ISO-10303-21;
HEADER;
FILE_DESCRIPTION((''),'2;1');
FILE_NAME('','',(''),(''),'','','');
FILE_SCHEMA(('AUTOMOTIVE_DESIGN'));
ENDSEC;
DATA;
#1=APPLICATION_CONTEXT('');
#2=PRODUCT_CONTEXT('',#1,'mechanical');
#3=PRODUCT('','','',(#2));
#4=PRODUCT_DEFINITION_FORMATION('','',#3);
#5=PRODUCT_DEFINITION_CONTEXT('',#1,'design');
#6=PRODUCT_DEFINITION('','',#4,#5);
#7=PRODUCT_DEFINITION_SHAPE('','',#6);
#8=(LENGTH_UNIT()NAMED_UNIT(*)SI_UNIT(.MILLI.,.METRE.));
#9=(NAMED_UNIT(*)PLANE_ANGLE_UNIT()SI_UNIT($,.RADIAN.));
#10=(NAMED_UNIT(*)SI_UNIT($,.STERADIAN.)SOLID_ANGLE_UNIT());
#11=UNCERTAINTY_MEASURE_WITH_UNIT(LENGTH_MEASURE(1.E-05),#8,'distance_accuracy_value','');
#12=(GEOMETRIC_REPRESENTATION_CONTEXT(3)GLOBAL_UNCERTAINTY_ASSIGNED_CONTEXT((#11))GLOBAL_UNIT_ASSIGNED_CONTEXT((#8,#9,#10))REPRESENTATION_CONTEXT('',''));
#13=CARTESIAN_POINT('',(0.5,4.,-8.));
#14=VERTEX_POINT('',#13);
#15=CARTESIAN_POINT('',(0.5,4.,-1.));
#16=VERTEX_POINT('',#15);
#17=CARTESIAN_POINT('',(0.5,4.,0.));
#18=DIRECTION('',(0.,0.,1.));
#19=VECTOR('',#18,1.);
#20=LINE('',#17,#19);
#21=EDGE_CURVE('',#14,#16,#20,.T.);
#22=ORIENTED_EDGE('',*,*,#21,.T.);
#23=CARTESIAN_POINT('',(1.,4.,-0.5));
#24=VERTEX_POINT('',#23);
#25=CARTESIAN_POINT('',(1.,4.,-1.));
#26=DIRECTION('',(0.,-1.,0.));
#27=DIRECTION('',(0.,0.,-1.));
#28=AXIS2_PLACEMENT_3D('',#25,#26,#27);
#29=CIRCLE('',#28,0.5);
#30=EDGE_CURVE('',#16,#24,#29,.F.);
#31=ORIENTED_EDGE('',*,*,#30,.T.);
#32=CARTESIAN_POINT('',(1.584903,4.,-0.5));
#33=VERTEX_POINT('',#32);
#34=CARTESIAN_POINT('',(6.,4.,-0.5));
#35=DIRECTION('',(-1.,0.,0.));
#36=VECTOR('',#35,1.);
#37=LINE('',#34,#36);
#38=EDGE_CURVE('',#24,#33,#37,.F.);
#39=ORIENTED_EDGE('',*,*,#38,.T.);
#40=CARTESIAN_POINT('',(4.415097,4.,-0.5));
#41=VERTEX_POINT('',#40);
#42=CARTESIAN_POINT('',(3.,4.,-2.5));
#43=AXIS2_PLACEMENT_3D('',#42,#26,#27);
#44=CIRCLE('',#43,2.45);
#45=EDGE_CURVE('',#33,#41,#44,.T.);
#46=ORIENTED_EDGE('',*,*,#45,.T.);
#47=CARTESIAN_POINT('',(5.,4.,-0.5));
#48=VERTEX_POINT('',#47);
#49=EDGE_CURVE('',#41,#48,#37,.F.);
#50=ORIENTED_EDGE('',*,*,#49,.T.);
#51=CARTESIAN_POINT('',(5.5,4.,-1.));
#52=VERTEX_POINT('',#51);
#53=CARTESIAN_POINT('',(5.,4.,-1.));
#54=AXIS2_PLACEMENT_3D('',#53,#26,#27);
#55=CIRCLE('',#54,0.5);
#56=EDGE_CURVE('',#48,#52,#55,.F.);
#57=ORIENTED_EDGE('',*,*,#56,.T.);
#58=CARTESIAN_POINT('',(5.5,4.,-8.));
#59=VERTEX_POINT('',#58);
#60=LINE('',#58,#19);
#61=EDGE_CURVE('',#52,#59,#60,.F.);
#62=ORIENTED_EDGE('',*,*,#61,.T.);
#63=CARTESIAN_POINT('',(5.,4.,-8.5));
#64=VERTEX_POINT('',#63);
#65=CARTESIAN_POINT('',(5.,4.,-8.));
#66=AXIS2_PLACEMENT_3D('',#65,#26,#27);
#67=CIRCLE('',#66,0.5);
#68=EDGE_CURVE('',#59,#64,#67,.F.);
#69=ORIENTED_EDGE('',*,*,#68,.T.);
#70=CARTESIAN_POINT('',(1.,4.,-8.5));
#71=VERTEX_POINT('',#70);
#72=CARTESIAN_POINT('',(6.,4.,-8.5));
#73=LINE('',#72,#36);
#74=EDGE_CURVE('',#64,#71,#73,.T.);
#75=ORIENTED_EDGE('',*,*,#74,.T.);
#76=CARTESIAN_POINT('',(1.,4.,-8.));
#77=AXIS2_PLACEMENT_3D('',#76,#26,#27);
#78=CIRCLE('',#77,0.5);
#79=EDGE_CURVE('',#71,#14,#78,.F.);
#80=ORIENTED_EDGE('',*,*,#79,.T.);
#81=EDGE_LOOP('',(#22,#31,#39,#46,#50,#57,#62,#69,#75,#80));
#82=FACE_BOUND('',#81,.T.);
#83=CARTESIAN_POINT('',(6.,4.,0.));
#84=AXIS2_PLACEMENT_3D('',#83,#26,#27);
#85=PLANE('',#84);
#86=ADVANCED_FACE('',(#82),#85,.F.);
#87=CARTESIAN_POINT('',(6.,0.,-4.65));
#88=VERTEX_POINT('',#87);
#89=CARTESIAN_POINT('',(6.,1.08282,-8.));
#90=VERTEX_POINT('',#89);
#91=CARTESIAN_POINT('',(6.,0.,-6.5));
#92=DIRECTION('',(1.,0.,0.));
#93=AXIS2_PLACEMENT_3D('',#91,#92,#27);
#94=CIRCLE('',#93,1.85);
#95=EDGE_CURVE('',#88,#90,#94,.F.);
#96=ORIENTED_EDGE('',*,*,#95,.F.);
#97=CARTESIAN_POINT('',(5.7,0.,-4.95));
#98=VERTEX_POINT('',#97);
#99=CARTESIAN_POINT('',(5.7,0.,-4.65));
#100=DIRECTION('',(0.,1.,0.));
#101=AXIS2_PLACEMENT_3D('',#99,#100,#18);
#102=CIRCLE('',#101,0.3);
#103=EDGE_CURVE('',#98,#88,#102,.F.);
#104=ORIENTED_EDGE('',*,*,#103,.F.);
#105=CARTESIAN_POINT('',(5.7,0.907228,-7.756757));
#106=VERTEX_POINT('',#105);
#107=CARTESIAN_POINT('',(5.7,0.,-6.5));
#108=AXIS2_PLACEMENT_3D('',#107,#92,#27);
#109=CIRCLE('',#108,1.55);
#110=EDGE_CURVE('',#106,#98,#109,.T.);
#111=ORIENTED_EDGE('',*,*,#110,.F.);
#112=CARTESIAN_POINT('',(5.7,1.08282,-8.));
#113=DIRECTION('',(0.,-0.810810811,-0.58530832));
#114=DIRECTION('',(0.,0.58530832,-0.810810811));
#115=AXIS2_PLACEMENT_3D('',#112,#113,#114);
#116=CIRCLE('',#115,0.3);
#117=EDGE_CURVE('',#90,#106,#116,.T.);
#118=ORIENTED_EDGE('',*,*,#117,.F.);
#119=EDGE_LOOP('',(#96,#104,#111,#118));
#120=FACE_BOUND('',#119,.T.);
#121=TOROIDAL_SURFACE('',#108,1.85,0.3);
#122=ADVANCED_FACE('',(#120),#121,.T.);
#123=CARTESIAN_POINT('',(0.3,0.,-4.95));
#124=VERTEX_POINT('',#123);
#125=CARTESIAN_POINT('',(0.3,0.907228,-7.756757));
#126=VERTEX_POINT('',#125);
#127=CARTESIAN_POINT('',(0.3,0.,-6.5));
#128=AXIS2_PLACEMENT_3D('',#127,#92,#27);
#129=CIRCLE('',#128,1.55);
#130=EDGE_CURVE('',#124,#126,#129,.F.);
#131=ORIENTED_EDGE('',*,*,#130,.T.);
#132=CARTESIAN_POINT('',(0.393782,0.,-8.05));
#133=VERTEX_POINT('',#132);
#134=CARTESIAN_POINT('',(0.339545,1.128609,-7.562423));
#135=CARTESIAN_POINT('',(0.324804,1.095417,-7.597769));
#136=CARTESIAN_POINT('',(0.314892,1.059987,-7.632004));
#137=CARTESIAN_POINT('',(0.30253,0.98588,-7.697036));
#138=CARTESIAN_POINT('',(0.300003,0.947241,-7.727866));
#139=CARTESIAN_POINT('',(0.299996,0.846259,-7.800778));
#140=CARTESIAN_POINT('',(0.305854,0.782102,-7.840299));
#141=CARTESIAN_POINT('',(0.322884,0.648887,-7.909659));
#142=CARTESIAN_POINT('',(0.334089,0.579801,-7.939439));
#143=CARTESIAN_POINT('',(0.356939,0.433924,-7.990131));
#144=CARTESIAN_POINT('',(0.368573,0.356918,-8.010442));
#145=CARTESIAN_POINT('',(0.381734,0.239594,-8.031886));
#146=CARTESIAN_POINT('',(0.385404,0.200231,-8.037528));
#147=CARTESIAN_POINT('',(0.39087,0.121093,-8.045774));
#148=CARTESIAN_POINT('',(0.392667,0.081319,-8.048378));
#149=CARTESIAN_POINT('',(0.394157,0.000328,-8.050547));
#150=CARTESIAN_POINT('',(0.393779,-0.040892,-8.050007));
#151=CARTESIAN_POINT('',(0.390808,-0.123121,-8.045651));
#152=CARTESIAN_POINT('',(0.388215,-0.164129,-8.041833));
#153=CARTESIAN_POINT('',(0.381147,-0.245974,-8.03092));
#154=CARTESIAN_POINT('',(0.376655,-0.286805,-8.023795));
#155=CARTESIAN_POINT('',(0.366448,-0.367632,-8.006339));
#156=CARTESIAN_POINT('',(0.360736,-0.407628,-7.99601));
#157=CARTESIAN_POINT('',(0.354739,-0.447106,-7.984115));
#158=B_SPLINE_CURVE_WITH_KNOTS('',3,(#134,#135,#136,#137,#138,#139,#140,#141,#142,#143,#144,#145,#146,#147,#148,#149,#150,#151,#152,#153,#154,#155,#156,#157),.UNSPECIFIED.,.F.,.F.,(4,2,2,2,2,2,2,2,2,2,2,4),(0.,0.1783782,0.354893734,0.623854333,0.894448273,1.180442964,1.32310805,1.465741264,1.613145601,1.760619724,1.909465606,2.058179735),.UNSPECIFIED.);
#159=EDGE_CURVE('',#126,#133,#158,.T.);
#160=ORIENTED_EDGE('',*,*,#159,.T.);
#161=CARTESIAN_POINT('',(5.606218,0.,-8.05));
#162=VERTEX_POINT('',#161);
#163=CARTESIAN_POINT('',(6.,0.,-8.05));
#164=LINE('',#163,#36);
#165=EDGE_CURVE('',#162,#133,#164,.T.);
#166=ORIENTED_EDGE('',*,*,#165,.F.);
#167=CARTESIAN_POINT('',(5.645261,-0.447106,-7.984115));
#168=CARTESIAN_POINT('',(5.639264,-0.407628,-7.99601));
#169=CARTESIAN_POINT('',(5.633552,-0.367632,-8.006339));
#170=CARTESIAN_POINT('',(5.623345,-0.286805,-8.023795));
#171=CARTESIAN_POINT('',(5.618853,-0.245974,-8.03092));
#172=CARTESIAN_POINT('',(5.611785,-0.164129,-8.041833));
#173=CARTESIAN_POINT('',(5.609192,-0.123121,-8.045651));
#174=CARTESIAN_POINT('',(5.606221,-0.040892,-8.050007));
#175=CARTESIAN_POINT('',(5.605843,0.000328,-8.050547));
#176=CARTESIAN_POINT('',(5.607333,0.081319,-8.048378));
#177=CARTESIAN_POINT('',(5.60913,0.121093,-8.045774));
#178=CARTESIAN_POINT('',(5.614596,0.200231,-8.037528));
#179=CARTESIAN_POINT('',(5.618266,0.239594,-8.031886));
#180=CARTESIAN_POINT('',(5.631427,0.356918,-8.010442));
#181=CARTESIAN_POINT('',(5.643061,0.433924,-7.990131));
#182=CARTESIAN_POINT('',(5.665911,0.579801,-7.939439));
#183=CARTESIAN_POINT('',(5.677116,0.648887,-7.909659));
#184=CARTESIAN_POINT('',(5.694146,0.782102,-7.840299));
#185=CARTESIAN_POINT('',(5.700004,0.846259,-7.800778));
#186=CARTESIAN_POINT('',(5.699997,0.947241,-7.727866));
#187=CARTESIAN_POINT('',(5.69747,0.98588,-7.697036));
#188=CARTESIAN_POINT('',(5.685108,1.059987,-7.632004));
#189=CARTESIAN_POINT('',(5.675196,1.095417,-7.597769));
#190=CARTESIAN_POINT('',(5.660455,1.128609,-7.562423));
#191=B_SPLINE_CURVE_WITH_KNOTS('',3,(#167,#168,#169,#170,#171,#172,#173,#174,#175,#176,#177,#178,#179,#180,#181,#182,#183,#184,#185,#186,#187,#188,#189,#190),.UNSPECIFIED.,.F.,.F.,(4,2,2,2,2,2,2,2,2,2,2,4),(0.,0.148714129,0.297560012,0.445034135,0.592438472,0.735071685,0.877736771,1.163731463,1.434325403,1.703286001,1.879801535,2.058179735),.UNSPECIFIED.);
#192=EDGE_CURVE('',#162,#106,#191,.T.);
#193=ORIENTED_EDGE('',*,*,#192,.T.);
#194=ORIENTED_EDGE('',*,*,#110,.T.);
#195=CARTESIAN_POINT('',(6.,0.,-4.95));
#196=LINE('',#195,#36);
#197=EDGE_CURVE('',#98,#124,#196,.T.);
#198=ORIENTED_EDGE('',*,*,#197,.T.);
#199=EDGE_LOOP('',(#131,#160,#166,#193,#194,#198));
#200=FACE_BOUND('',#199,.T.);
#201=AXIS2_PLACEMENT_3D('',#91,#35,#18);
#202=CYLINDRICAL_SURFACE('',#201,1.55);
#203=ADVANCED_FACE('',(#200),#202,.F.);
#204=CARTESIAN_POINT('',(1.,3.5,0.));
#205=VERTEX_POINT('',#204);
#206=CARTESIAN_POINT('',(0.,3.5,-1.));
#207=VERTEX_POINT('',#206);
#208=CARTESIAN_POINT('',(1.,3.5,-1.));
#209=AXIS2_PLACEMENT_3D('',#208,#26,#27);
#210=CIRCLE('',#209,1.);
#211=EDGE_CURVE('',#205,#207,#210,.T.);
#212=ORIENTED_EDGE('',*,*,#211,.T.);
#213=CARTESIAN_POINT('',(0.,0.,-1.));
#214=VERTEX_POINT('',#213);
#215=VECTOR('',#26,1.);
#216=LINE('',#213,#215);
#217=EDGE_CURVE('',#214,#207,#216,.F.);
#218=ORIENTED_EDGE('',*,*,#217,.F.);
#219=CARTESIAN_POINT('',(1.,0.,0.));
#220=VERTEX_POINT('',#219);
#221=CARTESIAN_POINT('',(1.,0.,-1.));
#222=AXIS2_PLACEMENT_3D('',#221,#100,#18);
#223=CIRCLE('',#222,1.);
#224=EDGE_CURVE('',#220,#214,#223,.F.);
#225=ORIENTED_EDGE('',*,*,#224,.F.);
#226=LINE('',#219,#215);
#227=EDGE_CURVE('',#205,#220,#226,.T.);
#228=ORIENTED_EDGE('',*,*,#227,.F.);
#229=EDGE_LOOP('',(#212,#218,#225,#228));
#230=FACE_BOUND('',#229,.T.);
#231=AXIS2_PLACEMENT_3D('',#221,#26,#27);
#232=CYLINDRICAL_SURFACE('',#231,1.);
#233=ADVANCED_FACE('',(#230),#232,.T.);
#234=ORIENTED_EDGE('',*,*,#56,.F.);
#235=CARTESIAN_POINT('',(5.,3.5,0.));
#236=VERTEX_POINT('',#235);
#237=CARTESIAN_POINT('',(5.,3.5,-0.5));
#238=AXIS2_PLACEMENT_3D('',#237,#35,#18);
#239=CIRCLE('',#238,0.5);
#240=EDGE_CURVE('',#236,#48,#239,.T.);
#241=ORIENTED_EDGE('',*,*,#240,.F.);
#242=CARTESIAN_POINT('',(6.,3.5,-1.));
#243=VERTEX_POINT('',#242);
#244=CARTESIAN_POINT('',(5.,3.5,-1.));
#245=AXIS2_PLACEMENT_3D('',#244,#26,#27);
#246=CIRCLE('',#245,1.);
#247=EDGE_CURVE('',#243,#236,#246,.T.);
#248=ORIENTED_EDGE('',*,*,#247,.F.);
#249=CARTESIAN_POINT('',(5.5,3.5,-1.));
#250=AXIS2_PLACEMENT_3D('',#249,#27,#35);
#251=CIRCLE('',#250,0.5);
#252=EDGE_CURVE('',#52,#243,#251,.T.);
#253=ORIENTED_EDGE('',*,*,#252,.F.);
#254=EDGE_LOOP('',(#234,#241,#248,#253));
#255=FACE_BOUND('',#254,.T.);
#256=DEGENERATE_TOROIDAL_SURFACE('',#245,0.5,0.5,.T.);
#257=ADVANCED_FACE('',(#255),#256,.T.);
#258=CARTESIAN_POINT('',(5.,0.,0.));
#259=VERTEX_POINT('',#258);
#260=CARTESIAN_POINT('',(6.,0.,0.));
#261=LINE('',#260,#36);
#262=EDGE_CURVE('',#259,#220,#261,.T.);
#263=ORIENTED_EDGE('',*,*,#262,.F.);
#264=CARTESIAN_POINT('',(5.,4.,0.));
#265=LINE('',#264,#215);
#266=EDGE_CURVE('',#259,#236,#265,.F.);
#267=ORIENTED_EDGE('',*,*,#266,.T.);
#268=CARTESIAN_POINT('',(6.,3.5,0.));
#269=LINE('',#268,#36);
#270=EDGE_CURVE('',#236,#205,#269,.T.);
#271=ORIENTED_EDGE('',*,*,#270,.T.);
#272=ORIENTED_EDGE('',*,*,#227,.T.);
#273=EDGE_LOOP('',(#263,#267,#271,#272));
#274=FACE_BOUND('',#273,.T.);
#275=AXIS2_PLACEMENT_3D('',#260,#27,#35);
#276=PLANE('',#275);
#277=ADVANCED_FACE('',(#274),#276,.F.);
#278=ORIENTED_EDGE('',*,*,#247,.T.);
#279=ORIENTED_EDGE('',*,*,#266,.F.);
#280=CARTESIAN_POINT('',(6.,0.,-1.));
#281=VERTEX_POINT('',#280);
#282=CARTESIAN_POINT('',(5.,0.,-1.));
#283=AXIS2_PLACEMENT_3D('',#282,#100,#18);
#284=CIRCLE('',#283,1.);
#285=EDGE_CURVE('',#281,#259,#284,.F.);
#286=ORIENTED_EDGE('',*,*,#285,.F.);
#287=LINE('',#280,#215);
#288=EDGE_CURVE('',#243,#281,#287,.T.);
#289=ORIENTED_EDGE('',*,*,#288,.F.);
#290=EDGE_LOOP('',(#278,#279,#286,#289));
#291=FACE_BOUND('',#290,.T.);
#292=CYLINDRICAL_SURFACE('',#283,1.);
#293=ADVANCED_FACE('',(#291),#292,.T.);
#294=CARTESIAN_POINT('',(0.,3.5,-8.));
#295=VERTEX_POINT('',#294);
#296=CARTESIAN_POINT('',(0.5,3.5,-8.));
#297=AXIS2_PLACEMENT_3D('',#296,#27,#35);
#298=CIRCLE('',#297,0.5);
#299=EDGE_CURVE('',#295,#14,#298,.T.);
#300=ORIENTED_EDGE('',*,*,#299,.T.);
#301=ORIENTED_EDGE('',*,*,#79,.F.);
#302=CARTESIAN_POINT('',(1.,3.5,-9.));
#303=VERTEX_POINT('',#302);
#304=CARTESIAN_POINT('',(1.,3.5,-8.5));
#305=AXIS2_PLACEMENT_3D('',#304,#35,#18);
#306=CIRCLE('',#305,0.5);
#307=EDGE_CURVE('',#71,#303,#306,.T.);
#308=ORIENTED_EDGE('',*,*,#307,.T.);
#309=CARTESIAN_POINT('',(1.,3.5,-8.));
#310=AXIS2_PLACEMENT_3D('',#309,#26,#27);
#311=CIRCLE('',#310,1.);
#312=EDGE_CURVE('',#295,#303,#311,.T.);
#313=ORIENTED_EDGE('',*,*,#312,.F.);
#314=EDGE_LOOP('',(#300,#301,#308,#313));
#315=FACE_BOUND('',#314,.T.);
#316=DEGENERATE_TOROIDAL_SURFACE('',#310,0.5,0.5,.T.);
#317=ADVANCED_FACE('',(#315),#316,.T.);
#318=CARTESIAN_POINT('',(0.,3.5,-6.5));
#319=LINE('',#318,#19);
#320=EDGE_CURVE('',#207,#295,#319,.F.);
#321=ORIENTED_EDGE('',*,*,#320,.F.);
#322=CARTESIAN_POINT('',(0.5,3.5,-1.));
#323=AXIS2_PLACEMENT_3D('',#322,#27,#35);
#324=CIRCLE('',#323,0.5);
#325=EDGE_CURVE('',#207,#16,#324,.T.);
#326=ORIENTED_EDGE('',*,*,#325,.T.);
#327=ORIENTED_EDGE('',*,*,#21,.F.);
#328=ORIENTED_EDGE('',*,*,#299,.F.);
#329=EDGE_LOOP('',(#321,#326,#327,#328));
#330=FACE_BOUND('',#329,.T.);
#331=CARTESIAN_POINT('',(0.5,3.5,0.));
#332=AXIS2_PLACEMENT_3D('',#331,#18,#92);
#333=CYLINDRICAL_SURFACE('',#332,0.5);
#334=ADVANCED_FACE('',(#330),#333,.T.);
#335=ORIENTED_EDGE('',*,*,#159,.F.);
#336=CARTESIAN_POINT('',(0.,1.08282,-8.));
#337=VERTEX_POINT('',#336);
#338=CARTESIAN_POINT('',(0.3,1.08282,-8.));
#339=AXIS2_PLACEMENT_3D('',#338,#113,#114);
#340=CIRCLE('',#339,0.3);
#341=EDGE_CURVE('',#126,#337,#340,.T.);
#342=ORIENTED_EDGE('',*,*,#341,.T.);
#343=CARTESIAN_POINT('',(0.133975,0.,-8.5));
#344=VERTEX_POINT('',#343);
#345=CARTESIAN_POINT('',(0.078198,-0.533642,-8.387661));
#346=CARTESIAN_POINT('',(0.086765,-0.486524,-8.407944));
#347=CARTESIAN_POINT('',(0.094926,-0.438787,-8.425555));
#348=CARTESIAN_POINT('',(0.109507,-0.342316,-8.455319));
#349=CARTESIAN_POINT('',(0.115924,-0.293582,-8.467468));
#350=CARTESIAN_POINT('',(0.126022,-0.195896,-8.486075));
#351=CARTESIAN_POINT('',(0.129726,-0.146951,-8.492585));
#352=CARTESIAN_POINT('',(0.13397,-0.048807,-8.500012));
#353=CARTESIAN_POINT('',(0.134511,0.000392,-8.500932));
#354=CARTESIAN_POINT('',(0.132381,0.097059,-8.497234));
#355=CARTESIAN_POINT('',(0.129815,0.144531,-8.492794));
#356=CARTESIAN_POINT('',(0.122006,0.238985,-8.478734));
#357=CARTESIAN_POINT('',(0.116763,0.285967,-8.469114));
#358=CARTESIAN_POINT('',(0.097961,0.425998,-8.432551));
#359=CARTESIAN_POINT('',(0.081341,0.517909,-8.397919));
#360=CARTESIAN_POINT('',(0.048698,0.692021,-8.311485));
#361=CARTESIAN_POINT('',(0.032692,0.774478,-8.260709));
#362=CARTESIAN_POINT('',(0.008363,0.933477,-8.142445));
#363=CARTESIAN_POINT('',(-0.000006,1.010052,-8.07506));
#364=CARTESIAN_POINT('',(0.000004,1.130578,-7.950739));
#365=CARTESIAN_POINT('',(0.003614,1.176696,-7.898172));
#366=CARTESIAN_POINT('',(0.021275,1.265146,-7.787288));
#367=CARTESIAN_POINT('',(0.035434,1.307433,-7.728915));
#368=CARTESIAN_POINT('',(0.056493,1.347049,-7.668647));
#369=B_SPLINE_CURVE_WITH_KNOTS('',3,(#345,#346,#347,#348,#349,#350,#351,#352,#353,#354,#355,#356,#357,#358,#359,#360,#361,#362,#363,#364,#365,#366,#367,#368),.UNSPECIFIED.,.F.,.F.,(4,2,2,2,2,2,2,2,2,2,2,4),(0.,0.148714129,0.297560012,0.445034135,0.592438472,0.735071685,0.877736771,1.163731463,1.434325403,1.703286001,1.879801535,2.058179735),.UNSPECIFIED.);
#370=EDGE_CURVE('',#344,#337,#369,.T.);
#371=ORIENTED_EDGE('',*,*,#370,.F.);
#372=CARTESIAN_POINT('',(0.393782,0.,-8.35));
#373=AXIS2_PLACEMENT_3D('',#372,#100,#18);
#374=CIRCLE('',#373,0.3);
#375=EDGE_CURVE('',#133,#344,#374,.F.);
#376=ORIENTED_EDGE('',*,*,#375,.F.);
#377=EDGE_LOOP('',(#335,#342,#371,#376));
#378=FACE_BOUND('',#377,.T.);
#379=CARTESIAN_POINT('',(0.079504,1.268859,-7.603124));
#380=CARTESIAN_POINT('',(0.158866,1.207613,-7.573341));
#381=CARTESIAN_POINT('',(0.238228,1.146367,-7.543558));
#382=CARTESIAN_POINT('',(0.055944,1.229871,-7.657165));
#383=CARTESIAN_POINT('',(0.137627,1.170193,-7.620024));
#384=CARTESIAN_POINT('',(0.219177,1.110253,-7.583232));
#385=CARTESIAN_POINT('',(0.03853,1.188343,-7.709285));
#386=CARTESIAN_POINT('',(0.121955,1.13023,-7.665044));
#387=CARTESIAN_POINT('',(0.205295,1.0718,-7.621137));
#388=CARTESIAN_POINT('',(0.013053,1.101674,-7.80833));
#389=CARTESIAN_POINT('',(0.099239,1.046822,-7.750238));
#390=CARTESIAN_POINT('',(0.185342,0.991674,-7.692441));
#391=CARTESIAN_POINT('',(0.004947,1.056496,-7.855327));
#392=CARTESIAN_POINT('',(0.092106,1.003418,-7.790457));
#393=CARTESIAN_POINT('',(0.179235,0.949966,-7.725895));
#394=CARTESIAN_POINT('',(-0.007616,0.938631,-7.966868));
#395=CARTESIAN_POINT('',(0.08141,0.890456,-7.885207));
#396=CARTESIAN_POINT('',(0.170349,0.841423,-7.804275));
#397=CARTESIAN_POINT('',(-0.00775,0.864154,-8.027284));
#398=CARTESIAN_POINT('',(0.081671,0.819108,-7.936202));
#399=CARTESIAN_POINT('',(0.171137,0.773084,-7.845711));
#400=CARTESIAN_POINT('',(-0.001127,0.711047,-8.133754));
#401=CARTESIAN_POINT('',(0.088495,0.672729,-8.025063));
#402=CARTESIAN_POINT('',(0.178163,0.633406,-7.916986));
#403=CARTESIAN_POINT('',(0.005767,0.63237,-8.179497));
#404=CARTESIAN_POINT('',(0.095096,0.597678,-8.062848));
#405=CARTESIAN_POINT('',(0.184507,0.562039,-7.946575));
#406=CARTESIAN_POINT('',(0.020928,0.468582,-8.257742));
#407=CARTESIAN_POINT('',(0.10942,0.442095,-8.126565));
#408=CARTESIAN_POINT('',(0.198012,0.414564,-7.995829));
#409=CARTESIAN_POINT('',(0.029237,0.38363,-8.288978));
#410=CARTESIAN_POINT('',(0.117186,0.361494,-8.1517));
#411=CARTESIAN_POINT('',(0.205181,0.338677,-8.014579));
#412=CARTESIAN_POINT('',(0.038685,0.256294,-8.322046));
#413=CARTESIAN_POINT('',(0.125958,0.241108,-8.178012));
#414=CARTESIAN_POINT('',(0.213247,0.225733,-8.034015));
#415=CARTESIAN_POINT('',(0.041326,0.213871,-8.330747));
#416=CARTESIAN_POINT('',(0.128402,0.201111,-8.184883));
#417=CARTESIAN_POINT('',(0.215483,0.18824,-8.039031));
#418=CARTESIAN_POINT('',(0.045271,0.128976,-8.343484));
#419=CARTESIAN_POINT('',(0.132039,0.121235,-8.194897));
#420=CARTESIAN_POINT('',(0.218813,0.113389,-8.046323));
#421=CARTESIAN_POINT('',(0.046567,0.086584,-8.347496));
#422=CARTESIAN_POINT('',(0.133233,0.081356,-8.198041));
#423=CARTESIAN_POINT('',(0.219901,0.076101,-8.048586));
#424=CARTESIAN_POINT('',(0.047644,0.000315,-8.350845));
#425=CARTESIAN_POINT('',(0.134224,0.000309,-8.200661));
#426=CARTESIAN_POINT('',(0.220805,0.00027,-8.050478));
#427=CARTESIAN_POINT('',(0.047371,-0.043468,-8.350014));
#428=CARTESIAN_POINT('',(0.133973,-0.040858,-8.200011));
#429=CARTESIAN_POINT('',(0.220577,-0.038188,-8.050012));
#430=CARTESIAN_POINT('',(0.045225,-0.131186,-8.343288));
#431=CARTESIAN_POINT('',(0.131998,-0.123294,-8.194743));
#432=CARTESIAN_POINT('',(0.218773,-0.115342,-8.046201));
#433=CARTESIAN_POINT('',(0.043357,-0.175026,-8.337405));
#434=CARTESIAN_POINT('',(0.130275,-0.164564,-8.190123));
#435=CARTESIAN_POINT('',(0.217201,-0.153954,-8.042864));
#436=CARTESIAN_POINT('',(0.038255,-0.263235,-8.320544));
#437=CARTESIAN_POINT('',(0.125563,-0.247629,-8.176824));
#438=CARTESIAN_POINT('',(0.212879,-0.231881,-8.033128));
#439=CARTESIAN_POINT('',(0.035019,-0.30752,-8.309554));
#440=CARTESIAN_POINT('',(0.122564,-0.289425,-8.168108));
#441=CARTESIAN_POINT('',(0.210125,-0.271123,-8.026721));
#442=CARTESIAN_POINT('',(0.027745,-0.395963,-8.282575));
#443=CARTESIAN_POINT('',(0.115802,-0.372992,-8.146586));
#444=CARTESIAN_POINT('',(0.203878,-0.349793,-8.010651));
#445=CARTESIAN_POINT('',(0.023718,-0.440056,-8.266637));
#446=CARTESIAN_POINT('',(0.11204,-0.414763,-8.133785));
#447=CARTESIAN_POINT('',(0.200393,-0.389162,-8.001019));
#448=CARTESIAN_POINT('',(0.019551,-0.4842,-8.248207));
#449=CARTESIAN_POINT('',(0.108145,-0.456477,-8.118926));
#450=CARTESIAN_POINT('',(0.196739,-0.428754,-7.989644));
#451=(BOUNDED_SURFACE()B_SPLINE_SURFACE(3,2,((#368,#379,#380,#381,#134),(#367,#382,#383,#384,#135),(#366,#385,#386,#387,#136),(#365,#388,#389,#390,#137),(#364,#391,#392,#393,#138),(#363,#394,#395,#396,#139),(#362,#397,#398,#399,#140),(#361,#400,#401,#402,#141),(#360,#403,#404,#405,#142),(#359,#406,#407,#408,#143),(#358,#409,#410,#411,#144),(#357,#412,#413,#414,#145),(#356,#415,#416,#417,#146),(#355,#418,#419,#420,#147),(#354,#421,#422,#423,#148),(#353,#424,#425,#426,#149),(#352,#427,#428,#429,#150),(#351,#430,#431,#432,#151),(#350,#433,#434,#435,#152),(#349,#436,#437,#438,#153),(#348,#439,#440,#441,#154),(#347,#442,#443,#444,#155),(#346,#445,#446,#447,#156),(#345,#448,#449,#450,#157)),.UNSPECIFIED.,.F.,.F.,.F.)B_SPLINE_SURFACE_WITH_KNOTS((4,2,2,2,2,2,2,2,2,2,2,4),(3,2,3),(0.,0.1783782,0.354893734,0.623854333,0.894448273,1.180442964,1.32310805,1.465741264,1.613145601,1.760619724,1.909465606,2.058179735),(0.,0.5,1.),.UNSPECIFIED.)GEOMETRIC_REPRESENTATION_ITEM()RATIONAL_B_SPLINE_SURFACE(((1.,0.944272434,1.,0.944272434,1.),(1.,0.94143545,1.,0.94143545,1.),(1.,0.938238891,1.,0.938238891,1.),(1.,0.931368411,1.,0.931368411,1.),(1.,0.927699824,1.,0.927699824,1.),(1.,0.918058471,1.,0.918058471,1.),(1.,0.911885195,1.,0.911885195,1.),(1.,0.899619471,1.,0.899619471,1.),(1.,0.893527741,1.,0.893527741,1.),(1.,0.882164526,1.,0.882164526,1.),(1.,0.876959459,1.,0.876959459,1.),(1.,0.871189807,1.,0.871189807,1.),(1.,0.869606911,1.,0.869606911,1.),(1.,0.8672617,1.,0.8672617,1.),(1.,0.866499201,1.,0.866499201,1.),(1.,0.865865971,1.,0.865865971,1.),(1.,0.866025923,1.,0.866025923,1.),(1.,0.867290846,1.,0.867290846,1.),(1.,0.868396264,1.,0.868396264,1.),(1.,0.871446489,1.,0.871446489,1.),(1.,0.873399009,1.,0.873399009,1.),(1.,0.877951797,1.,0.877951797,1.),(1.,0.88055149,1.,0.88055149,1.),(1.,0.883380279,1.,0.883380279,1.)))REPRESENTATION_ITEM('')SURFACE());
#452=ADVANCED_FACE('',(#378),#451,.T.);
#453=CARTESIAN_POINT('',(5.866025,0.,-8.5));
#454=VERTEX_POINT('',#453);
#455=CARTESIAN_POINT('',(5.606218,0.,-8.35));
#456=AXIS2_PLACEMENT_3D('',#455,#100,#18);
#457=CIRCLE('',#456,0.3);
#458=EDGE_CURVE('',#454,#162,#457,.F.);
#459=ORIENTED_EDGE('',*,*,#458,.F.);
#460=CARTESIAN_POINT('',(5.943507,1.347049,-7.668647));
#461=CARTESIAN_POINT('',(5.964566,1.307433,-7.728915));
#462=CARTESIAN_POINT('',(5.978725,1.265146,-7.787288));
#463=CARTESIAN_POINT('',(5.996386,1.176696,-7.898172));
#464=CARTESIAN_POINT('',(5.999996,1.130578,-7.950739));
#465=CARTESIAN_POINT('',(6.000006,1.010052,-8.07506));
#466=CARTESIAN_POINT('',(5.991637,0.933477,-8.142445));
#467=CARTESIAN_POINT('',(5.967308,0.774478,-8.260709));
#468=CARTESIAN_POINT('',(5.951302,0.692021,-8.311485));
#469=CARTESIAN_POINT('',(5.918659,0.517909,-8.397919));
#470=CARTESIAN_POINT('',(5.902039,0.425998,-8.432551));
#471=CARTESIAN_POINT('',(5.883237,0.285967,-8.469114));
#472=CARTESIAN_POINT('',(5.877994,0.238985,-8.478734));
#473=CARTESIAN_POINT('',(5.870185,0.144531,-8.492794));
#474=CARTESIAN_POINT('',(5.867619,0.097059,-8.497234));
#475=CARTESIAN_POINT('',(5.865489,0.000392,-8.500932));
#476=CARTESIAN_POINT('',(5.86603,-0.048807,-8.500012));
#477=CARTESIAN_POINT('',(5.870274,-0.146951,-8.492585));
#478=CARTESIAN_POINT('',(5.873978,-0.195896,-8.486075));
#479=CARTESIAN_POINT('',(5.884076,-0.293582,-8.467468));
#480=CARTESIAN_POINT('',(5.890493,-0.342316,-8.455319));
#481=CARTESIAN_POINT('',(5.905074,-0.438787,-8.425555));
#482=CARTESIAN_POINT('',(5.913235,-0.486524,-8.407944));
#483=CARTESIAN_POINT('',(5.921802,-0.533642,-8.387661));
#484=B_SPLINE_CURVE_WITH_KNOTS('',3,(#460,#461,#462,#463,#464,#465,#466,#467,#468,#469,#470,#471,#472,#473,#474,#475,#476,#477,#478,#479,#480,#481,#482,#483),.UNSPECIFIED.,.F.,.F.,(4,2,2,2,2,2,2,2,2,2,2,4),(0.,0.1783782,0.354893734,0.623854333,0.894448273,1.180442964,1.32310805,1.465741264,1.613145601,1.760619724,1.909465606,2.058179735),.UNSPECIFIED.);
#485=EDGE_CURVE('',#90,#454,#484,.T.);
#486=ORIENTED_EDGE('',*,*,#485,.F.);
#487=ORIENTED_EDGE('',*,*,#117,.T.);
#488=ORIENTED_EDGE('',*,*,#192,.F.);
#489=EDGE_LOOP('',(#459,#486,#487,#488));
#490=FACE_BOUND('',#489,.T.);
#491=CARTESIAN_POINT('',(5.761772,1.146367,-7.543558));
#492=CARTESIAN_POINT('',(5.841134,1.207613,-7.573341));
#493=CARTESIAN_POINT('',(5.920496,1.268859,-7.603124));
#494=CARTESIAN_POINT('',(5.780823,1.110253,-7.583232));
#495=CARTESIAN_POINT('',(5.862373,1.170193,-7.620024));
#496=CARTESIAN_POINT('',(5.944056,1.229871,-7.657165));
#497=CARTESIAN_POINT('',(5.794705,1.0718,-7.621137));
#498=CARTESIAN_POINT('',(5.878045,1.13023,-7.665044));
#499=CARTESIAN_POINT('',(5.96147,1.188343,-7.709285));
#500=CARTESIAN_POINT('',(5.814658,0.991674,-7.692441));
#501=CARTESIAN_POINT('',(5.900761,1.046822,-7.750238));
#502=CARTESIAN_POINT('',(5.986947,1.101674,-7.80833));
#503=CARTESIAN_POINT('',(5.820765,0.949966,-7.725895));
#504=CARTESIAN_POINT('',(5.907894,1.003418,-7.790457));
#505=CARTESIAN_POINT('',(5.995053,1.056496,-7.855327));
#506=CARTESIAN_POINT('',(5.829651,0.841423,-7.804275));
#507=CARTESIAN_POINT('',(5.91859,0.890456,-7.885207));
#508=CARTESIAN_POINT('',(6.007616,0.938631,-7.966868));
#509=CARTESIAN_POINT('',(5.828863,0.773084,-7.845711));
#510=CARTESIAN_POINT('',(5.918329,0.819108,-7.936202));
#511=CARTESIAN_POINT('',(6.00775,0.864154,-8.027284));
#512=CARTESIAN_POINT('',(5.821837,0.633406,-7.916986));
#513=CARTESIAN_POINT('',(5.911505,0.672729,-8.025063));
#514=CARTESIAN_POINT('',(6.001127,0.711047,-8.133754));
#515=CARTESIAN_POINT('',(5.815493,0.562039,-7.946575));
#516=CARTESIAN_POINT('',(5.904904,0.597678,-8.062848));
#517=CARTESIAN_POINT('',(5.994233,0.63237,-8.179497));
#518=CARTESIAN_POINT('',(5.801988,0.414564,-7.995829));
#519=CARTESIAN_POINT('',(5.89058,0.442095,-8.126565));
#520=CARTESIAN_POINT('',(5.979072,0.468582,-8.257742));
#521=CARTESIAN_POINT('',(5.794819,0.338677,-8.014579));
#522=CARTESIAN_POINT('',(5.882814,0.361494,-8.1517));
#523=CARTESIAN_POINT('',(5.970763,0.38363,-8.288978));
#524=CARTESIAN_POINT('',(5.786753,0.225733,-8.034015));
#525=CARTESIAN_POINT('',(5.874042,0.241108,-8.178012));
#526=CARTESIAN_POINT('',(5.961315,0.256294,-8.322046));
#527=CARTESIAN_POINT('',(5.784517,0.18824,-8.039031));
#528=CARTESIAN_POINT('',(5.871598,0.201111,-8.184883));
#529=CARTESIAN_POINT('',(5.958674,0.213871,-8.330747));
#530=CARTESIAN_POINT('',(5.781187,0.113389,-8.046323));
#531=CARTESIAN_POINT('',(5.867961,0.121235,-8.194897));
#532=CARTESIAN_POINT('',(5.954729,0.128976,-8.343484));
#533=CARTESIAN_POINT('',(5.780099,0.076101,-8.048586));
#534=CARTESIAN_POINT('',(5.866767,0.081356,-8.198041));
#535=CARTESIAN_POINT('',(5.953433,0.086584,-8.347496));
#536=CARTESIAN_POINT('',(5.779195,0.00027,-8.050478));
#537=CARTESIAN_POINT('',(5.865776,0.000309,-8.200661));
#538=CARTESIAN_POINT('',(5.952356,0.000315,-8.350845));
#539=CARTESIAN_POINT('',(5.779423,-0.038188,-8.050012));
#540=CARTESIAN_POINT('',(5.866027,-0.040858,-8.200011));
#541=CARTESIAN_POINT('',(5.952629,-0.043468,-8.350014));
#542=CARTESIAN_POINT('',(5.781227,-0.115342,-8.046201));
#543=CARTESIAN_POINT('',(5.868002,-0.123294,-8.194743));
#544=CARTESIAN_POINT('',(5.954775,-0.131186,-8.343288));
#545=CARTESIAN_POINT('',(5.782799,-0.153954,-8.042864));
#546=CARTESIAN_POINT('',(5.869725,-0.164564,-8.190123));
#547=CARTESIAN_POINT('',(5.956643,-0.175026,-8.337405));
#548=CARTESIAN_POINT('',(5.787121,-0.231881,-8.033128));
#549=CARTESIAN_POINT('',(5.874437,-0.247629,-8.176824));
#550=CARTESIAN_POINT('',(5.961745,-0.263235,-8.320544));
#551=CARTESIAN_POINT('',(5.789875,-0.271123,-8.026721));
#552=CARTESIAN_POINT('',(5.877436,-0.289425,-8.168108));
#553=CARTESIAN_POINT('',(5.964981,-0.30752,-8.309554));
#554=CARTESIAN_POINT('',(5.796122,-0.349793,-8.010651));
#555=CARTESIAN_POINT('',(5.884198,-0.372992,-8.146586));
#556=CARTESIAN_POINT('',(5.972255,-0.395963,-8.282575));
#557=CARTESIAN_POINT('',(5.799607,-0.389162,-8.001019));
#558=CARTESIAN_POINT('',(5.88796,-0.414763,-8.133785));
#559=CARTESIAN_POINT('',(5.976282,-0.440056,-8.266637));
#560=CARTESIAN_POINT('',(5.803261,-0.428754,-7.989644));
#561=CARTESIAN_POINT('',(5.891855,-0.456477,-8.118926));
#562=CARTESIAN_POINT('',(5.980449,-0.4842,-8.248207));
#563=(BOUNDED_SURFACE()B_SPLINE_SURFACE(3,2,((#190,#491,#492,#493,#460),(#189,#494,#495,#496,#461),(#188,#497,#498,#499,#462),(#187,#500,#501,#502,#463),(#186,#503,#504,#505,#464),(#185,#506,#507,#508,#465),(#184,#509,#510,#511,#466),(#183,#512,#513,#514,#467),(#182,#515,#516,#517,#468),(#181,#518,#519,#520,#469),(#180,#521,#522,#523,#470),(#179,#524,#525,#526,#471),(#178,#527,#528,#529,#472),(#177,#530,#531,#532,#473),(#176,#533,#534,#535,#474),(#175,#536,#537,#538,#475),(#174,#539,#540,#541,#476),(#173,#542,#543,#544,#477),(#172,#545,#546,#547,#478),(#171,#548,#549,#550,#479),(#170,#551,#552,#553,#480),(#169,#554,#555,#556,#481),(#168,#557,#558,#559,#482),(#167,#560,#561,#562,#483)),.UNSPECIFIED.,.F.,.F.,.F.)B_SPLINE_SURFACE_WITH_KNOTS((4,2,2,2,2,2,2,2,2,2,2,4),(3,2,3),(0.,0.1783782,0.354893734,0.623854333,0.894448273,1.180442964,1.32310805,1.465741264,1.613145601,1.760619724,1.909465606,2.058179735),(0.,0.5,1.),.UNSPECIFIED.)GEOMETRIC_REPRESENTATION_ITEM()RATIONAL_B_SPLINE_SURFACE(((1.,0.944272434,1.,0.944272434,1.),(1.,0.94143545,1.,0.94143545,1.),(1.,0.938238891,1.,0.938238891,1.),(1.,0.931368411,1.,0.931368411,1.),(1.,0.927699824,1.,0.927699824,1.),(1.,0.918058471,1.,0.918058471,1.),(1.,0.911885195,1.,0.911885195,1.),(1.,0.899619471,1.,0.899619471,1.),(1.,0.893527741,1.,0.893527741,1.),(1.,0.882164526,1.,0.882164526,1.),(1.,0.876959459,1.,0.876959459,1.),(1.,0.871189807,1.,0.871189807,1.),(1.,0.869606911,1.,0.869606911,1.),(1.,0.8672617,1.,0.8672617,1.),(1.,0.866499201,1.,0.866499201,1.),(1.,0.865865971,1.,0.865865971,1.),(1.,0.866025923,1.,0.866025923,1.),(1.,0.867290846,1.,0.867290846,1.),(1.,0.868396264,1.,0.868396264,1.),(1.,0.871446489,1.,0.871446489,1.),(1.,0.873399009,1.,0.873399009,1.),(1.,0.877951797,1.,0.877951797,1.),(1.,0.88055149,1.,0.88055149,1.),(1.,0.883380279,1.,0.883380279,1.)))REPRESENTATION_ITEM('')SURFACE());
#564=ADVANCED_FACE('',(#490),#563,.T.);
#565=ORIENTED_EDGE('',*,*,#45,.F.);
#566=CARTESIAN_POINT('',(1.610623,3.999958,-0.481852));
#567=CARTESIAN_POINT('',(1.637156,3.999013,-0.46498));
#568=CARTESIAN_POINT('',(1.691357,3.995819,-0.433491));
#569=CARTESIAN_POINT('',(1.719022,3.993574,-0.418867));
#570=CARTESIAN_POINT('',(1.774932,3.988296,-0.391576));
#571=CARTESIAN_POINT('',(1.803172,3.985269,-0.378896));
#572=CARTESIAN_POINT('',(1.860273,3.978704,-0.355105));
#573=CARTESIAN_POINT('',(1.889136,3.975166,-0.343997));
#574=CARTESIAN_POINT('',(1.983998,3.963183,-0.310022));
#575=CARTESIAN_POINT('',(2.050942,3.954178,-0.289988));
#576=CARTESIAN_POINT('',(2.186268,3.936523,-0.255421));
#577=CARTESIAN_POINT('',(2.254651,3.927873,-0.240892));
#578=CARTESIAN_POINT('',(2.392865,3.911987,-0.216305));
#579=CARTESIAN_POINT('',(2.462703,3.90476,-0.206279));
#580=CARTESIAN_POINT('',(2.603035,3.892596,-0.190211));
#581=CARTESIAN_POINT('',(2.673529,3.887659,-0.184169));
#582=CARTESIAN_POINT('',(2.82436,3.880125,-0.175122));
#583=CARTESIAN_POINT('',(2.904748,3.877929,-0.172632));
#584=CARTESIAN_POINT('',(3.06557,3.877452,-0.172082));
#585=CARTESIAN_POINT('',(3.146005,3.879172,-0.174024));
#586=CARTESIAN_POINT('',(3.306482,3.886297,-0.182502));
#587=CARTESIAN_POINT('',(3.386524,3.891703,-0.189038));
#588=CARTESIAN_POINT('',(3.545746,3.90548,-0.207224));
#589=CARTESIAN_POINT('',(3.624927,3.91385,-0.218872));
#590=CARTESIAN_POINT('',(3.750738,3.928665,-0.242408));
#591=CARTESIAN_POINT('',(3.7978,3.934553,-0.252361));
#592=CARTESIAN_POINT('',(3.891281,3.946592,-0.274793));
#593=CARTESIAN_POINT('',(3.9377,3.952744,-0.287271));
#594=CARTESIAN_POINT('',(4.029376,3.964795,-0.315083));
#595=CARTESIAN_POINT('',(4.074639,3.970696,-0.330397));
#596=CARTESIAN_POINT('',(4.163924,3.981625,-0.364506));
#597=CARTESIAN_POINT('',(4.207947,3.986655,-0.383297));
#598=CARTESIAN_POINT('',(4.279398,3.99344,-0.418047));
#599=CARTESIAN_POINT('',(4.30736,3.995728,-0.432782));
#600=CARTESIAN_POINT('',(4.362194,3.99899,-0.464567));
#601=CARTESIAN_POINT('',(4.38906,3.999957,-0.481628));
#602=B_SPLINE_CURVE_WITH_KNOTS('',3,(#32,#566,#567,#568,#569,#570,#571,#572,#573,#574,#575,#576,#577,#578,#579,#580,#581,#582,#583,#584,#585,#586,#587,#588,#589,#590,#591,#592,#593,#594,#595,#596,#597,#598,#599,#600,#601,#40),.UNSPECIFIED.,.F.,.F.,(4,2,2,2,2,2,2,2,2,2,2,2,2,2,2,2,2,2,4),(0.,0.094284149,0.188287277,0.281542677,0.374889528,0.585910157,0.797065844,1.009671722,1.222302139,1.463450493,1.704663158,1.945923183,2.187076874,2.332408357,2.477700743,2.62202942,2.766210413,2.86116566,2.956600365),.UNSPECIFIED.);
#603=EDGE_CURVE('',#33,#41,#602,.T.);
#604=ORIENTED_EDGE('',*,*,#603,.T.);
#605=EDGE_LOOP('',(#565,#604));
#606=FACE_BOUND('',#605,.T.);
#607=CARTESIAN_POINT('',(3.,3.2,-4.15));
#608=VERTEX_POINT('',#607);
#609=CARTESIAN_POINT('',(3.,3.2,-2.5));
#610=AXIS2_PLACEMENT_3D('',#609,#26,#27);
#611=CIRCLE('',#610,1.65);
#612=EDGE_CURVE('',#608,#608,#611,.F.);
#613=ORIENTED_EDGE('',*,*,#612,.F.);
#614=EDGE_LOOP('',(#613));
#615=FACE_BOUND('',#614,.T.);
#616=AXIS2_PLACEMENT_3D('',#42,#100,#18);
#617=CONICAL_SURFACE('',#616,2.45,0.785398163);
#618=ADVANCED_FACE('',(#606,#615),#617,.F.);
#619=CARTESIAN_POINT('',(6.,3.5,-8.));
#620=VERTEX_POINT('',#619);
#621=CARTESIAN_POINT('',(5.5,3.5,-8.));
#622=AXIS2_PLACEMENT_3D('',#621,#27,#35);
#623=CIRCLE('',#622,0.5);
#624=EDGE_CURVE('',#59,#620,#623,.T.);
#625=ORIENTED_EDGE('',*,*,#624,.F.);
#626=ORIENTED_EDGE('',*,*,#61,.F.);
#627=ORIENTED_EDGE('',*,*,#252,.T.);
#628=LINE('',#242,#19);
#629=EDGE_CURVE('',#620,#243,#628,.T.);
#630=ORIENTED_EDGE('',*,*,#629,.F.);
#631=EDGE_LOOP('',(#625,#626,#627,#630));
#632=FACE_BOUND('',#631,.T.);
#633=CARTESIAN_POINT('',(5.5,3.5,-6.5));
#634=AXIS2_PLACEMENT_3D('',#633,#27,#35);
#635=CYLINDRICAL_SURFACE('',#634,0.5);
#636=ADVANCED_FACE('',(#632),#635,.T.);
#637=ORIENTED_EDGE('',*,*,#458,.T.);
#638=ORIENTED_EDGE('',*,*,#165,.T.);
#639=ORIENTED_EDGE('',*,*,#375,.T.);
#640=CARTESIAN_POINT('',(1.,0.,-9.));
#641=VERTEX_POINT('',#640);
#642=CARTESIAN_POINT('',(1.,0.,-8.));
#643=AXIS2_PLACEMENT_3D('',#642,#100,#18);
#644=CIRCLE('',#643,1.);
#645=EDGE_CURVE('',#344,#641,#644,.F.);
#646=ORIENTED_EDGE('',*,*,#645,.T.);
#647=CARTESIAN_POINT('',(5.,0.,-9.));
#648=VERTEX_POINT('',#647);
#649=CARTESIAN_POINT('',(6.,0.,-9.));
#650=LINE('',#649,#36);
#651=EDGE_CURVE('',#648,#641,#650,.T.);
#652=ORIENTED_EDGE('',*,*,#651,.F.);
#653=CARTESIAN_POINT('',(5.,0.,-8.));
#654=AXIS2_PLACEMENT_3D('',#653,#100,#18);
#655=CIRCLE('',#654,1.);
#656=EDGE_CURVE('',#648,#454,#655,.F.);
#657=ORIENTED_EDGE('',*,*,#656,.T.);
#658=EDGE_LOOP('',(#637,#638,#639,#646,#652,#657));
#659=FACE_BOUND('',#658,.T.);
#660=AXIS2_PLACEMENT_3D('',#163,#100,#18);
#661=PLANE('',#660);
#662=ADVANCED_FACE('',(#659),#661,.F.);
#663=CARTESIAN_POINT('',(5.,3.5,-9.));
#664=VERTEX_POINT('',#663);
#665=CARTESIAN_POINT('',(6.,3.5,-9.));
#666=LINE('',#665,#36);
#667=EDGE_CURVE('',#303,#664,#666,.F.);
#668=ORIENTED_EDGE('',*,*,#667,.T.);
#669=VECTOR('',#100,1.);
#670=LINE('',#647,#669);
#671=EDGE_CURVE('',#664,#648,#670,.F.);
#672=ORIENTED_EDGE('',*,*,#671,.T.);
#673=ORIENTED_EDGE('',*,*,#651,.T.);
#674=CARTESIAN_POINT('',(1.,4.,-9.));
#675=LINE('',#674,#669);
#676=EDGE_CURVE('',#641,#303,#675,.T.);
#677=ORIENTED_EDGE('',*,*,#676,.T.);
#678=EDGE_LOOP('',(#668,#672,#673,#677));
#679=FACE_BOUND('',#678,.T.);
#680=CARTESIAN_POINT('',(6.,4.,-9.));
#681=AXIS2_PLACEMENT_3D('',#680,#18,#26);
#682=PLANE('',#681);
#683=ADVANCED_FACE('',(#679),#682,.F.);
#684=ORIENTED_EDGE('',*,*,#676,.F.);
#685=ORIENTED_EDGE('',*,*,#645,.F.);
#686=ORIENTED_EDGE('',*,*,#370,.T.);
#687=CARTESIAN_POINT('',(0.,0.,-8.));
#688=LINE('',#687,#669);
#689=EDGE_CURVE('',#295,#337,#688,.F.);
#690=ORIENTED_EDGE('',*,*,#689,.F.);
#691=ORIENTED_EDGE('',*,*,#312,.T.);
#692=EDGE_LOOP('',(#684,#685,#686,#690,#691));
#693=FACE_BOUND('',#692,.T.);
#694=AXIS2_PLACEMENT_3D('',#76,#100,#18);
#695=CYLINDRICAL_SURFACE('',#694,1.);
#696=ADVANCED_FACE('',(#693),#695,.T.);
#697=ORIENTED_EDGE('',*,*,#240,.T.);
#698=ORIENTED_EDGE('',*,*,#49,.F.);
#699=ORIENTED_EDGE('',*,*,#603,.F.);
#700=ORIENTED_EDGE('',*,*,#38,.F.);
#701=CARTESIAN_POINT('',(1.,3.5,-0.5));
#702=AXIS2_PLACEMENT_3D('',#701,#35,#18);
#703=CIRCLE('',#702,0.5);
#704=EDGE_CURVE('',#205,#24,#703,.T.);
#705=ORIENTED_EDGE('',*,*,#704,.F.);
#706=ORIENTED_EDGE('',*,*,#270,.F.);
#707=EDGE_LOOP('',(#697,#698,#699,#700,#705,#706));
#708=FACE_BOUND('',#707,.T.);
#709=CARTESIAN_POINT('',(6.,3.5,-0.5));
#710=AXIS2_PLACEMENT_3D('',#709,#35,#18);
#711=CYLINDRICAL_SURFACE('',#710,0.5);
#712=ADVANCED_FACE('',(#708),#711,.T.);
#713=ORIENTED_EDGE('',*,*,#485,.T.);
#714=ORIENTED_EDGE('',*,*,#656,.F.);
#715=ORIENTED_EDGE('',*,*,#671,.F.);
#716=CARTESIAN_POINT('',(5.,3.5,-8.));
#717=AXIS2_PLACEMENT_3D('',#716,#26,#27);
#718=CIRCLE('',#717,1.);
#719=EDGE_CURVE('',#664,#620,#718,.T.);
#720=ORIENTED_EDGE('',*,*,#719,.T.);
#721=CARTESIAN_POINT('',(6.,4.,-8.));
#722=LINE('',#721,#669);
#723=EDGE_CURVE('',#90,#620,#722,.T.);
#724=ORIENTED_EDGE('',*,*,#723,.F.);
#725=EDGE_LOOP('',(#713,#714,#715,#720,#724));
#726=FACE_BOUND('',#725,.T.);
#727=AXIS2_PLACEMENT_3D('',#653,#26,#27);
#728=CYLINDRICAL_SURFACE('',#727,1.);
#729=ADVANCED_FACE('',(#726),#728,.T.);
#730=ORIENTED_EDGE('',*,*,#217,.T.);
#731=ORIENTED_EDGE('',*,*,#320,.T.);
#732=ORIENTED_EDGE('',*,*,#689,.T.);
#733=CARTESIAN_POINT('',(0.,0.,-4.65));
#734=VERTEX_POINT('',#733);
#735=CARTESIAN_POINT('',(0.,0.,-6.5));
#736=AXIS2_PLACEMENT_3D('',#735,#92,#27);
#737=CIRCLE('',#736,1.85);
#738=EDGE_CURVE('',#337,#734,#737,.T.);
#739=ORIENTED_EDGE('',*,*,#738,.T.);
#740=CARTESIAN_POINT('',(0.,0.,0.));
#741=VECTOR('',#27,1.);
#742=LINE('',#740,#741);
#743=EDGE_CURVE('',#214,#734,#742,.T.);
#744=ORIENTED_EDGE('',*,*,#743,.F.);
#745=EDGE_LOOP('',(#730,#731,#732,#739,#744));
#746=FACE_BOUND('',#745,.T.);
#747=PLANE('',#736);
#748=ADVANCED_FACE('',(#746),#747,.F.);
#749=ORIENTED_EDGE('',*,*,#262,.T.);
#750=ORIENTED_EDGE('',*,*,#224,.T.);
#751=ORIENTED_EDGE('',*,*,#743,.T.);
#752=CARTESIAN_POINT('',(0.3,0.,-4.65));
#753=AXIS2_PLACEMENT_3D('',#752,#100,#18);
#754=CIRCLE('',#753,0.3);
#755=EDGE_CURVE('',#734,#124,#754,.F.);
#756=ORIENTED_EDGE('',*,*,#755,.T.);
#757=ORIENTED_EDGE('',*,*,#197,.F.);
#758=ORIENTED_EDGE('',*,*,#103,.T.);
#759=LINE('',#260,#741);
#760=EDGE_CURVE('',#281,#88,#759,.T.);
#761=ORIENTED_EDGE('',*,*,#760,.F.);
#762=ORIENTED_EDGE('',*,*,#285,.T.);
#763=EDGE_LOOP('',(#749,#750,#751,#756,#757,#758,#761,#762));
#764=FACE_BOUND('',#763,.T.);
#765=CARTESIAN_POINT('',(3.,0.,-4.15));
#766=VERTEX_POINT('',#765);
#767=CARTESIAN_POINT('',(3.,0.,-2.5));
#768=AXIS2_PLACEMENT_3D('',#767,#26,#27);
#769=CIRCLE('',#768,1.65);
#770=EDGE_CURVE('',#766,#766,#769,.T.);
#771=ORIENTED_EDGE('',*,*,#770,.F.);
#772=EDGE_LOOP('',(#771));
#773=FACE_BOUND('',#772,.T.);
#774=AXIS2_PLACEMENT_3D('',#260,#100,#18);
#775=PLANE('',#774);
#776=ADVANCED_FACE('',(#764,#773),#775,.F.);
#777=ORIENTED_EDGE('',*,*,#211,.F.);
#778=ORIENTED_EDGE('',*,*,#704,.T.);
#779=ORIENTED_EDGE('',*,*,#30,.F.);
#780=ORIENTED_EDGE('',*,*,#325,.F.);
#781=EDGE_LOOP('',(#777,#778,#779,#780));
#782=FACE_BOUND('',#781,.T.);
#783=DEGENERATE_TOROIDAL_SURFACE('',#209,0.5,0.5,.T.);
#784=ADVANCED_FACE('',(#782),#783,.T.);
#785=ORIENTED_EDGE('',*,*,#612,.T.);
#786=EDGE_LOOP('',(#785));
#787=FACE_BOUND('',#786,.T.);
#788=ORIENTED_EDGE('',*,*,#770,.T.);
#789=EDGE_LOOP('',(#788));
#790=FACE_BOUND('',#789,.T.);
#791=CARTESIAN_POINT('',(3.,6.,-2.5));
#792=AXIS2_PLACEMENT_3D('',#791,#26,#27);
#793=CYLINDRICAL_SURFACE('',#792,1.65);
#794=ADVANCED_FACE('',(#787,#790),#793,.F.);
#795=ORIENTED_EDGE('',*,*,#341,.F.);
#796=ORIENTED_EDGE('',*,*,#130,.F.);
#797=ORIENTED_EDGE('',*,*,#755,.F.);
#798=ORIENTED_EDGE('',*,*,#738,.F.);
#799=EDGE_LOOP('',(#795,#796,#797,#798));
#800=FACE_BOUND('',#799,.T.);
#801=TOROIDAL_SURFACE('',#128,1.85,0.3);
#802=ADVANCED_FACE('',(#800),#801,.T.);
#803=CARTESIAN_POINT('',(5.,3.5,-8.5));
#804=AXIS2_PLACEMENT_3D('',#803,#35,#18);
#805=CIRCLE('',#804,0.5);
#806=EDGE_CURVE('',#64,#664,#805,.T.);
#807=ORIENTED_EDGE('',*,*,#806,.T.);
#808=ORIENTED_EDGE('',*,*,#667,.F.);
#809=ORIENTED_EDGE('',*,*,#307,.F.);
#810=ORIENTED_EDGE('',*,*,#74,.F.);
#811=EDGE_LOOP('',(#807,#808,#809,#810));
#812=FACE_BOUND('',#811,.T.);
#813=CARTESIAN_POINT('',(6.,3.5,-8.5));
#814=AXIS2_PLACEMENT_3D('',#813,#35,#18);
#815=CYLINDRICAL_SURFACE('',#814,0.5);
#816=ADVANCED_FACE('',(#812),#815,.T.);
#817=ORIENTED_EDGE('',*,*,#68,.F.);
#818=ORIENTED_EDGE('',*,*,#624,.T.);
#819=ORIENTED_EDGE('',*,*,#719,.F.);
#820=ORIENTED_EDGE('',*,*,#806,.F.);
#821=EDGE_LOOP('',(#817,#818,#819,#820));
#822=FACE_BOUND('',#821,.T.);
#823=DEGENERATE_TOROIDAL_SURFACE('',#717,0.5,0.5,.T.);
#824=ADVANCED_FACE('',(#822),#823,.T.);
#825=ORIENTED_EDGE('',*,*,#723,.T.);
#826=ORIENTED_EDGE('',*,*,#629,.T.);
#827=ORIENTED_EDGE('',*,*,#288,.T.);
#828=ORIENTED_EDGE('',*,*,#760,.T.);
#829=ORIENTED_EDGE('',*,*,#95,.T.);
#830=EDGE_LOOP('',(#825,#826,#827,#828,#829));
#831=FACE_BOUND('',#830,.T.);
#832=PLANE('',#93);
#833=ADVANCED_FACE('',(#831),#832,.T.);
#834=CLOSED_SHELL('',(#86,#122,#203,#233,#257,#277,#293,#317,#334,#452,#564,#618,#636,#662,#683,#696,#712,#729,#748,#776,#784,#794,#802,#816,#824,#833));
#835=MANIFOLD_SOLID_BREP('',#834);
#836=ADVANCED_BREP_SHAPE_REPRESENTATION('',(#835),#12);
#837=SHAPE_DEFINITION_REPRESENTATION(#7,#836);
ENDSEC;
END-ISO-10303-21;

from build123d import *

# Parameters (mm, degrees)
EXTRUDE_1_DEPTH     = 6
SKETCH_2_R          = 1.65
CUT_EXTRUDE_1_DEPTH = 6
FILLET_1_R          = 1
CHAMFER_1_SIZE      = 0.8
FILLET_2_R          = 0.5
FILLET_3_R          = 0.3


with BuildPart() as part:
    # 草圖1 → 填料-伸長1 (new body)
    with BuildSketch(Plane(origin=(0, 0, 0), x_dir=(0, 0, -1), z_dir=(1, 0, 0))):
        with BuildLine():
            Line((0, 0), (4.95, 0))
            ThreePointArc((4.95, 0), (6.5, 1.55), (8.05, 0))
            Line((8.05, 0), (9, 0))
            Line((9, 0), (9, 4))
            Line((9, 4), (0, 4))
            Line((0, 4), (0, 0))
        make_face()
    extrude(amount=EXTRUDE_1_DEPTH)

    # 草圖2 → 除料-伸長1 (cut)
    with BuildSketch(Plane(origin=(0, 0, 0), x_dir=(-1, 0, 0), z_dir=(0, -1, 0))):
        with Locations(Location((-3, 2.5, 0), (0, 0, 90))):
            Circle(SKETCH_2_R)
    extrude(amount=-CUT_EXTRUDE_1_DEPTH, mode=Mode.SUBTRACT)

    # 圓角1
    fillet_1_edges = [part.edges().sort_by_distance(p)[0] for p in [
        (6, 2, -9),
        (6, 2, 0),
        (0, 2, -9),
        (0, 2, 0),
    ]]
    fillet(fillet_1_edges, radius=FILLET_1_R)

    # 導角1
    chamfer_1_edges = [part.edges().sort_by_distance(p)[0] for p in [
        (3, 4, -0.85),
    ]]
    chamfer(chamfer_1_edges, length=CHAMFER_1_SIZE)

    # 圓角2
    # the kernel refuses this fillet: 0.5 mm, written as the material it takes off along each edge
    with BuildSketch(Plane(origin=(6, 4, -8), x_dir=(-1, 0, 0), z_dir=(0, 0, 1))) as fillet_2_piece_1:
        with BuildLine():
            CenterArc((FILLET_2_R, FILLET_2_R), FILLET_2_R, 180, 90)
            Line((0, FILLET_2_R), (0, 0))
            Line((0, 0), (FILLET_2_R, 0))
        make_face()
    extrude(amount=7, mode=Mode.SUBTRACT)
    with BuildSketch(Plane(origin=(0, 4, -8), x_dir=(1, 0, 0), z_dir=(0, 0, 1))) as fillet_2_piece_2:
        with BuildLine():
            CenterArc((FILLET_2_R, -FILLET_2_R), FILLET_2_R, 90, 90)
            Line((0, -FILLET_2_R), (0, 0))
            Line((0, 0), (FILLET_2_R, 0))
        make_face()
    extrude(amount=7, mode=Mode.SUBTRACT)
    with BuildSketch(Plane(origin=(1, 4, 0), x_dir=(0, 0, -1), z_dir=(1, 0, 0))) as fillet_2_piece_3:
        with BuildLine():
            CenterArc((FILLET_2_R, -FILLET_2_R), FILLET_2_R, 90, 90)
            Line((0, -FILLET_2_R), (0, 0))
            Line((0, 0), (FILLET_2_R, 0))
        make_face()
    extrude(amount=4, mode=Mode.SUBTRACT)
    with BuildSketch(Plane(origin=(1, 4, -9), x_dir=(0, 0, 1), z_dir=(1, 0, 0))) as fillet_2_piece_4:
        with BuildLine():
            CenterArc((FILLET_2_R, FILLET_2_R), FILLET_2_R, 180, 90)
            Line((0, FILLET_2_R), (0, 0))
            Line((0, 0), (FILLET_2_R, 0))
        make_face()
    extrude(amount=4, mode=Mode.SUBTRACT)
    with BuildSketch(Plane(origin=(1, 4, -1), x_dir=(0, 0, 1), z_dir=(1, 0, 0))) as fillet_2_piece_5:
        with BuildLine():
            CenterArc((1 - FILLET_2_R, FILLET_2_R), FILLET_2_R, 270, 90)
            Line((1, FILLET_2_R), (1, 0))
            Line((1, 0), (1 - FILLET_2_R, 0))
        make_face()
    revolve(axis=Axis((1, 4, -1), (0, -1, 0)), revolution_arc=90, mode=Mode.SUBTRACT)
    with BuildSketch(Plane(origin=(5, 4, -1), x_dir=(0, 0, 1), z_dir=(-1, 0, 0))) as fillet_2_piece_6:
        with BuildLine():
            CenterArc((1 - FILLET_2_R, -FILLET_2_R), FILLET_2_R, 0, 90)
            Line((1, -FILLET_2_R), (1, 0))
            Line((1, 0), (1 - FILLET_2_R, 0))
        make_face()
    revolve(axis=Axis((5, 4, -1), (0, 1, 0)), revolution_arc=90, mode=Mode.SUBTRACT)
    with BuildSketch(Plane(origin=(1, 4, -8), x_dir=(-1, 0, 0), z_dir=(0, 0, 1))) as fillet_2_piece_7:
        with BuildLine():
            CenterArc((1 - FILLET_2_R, FILLET_2_R), FILLET_2_R, 270, 90)
            Line((1, FILLET_2_R), (1, 0))
            Line((1, 0), (1 - FILLET_2_R, 0))
        make_face()
    revolve(axis=Axis((1, 4, -8), (0, -1, 0)), revolution_arc=90, mode=Mode.SUBTRACT)
    with BuildSketch(Plane(origin=(5, 4, -8), x_dir=(1, 0, 0), z_dir=(0, 0, 1))) as fillet_2_piece_8:
        with BuildLine():
            CenterArc((1 - FILLET_2_R, -FILLET_2_R), FILLET_2_R, 0, 90)
            Line((1, -FILLET_2_R), (1, 0))
            Line((1, 0), (1 - FILLET_2_R, 0))
        make_face()
    revolve(axis=Axis((5, 4, -8), (0, 1, 0)), revolution_arc=90, mode=Mode.SUBTRACT)

    # 圓角3
    fillet_3_edges = [part.edges().sort_by_distance(p)[0] for p in [
        (6, 1.537449186, -6.303149803),
        (0.000701488, 0.196850436, -8.037449158),
        (5.999298512, 0.196850436, -8.037449158),
        (0, 1.537449186, -6.303149803),
    ]]
    fillet(fillet_3_edges, radius=FILLET_3_R)


solid = part.part
